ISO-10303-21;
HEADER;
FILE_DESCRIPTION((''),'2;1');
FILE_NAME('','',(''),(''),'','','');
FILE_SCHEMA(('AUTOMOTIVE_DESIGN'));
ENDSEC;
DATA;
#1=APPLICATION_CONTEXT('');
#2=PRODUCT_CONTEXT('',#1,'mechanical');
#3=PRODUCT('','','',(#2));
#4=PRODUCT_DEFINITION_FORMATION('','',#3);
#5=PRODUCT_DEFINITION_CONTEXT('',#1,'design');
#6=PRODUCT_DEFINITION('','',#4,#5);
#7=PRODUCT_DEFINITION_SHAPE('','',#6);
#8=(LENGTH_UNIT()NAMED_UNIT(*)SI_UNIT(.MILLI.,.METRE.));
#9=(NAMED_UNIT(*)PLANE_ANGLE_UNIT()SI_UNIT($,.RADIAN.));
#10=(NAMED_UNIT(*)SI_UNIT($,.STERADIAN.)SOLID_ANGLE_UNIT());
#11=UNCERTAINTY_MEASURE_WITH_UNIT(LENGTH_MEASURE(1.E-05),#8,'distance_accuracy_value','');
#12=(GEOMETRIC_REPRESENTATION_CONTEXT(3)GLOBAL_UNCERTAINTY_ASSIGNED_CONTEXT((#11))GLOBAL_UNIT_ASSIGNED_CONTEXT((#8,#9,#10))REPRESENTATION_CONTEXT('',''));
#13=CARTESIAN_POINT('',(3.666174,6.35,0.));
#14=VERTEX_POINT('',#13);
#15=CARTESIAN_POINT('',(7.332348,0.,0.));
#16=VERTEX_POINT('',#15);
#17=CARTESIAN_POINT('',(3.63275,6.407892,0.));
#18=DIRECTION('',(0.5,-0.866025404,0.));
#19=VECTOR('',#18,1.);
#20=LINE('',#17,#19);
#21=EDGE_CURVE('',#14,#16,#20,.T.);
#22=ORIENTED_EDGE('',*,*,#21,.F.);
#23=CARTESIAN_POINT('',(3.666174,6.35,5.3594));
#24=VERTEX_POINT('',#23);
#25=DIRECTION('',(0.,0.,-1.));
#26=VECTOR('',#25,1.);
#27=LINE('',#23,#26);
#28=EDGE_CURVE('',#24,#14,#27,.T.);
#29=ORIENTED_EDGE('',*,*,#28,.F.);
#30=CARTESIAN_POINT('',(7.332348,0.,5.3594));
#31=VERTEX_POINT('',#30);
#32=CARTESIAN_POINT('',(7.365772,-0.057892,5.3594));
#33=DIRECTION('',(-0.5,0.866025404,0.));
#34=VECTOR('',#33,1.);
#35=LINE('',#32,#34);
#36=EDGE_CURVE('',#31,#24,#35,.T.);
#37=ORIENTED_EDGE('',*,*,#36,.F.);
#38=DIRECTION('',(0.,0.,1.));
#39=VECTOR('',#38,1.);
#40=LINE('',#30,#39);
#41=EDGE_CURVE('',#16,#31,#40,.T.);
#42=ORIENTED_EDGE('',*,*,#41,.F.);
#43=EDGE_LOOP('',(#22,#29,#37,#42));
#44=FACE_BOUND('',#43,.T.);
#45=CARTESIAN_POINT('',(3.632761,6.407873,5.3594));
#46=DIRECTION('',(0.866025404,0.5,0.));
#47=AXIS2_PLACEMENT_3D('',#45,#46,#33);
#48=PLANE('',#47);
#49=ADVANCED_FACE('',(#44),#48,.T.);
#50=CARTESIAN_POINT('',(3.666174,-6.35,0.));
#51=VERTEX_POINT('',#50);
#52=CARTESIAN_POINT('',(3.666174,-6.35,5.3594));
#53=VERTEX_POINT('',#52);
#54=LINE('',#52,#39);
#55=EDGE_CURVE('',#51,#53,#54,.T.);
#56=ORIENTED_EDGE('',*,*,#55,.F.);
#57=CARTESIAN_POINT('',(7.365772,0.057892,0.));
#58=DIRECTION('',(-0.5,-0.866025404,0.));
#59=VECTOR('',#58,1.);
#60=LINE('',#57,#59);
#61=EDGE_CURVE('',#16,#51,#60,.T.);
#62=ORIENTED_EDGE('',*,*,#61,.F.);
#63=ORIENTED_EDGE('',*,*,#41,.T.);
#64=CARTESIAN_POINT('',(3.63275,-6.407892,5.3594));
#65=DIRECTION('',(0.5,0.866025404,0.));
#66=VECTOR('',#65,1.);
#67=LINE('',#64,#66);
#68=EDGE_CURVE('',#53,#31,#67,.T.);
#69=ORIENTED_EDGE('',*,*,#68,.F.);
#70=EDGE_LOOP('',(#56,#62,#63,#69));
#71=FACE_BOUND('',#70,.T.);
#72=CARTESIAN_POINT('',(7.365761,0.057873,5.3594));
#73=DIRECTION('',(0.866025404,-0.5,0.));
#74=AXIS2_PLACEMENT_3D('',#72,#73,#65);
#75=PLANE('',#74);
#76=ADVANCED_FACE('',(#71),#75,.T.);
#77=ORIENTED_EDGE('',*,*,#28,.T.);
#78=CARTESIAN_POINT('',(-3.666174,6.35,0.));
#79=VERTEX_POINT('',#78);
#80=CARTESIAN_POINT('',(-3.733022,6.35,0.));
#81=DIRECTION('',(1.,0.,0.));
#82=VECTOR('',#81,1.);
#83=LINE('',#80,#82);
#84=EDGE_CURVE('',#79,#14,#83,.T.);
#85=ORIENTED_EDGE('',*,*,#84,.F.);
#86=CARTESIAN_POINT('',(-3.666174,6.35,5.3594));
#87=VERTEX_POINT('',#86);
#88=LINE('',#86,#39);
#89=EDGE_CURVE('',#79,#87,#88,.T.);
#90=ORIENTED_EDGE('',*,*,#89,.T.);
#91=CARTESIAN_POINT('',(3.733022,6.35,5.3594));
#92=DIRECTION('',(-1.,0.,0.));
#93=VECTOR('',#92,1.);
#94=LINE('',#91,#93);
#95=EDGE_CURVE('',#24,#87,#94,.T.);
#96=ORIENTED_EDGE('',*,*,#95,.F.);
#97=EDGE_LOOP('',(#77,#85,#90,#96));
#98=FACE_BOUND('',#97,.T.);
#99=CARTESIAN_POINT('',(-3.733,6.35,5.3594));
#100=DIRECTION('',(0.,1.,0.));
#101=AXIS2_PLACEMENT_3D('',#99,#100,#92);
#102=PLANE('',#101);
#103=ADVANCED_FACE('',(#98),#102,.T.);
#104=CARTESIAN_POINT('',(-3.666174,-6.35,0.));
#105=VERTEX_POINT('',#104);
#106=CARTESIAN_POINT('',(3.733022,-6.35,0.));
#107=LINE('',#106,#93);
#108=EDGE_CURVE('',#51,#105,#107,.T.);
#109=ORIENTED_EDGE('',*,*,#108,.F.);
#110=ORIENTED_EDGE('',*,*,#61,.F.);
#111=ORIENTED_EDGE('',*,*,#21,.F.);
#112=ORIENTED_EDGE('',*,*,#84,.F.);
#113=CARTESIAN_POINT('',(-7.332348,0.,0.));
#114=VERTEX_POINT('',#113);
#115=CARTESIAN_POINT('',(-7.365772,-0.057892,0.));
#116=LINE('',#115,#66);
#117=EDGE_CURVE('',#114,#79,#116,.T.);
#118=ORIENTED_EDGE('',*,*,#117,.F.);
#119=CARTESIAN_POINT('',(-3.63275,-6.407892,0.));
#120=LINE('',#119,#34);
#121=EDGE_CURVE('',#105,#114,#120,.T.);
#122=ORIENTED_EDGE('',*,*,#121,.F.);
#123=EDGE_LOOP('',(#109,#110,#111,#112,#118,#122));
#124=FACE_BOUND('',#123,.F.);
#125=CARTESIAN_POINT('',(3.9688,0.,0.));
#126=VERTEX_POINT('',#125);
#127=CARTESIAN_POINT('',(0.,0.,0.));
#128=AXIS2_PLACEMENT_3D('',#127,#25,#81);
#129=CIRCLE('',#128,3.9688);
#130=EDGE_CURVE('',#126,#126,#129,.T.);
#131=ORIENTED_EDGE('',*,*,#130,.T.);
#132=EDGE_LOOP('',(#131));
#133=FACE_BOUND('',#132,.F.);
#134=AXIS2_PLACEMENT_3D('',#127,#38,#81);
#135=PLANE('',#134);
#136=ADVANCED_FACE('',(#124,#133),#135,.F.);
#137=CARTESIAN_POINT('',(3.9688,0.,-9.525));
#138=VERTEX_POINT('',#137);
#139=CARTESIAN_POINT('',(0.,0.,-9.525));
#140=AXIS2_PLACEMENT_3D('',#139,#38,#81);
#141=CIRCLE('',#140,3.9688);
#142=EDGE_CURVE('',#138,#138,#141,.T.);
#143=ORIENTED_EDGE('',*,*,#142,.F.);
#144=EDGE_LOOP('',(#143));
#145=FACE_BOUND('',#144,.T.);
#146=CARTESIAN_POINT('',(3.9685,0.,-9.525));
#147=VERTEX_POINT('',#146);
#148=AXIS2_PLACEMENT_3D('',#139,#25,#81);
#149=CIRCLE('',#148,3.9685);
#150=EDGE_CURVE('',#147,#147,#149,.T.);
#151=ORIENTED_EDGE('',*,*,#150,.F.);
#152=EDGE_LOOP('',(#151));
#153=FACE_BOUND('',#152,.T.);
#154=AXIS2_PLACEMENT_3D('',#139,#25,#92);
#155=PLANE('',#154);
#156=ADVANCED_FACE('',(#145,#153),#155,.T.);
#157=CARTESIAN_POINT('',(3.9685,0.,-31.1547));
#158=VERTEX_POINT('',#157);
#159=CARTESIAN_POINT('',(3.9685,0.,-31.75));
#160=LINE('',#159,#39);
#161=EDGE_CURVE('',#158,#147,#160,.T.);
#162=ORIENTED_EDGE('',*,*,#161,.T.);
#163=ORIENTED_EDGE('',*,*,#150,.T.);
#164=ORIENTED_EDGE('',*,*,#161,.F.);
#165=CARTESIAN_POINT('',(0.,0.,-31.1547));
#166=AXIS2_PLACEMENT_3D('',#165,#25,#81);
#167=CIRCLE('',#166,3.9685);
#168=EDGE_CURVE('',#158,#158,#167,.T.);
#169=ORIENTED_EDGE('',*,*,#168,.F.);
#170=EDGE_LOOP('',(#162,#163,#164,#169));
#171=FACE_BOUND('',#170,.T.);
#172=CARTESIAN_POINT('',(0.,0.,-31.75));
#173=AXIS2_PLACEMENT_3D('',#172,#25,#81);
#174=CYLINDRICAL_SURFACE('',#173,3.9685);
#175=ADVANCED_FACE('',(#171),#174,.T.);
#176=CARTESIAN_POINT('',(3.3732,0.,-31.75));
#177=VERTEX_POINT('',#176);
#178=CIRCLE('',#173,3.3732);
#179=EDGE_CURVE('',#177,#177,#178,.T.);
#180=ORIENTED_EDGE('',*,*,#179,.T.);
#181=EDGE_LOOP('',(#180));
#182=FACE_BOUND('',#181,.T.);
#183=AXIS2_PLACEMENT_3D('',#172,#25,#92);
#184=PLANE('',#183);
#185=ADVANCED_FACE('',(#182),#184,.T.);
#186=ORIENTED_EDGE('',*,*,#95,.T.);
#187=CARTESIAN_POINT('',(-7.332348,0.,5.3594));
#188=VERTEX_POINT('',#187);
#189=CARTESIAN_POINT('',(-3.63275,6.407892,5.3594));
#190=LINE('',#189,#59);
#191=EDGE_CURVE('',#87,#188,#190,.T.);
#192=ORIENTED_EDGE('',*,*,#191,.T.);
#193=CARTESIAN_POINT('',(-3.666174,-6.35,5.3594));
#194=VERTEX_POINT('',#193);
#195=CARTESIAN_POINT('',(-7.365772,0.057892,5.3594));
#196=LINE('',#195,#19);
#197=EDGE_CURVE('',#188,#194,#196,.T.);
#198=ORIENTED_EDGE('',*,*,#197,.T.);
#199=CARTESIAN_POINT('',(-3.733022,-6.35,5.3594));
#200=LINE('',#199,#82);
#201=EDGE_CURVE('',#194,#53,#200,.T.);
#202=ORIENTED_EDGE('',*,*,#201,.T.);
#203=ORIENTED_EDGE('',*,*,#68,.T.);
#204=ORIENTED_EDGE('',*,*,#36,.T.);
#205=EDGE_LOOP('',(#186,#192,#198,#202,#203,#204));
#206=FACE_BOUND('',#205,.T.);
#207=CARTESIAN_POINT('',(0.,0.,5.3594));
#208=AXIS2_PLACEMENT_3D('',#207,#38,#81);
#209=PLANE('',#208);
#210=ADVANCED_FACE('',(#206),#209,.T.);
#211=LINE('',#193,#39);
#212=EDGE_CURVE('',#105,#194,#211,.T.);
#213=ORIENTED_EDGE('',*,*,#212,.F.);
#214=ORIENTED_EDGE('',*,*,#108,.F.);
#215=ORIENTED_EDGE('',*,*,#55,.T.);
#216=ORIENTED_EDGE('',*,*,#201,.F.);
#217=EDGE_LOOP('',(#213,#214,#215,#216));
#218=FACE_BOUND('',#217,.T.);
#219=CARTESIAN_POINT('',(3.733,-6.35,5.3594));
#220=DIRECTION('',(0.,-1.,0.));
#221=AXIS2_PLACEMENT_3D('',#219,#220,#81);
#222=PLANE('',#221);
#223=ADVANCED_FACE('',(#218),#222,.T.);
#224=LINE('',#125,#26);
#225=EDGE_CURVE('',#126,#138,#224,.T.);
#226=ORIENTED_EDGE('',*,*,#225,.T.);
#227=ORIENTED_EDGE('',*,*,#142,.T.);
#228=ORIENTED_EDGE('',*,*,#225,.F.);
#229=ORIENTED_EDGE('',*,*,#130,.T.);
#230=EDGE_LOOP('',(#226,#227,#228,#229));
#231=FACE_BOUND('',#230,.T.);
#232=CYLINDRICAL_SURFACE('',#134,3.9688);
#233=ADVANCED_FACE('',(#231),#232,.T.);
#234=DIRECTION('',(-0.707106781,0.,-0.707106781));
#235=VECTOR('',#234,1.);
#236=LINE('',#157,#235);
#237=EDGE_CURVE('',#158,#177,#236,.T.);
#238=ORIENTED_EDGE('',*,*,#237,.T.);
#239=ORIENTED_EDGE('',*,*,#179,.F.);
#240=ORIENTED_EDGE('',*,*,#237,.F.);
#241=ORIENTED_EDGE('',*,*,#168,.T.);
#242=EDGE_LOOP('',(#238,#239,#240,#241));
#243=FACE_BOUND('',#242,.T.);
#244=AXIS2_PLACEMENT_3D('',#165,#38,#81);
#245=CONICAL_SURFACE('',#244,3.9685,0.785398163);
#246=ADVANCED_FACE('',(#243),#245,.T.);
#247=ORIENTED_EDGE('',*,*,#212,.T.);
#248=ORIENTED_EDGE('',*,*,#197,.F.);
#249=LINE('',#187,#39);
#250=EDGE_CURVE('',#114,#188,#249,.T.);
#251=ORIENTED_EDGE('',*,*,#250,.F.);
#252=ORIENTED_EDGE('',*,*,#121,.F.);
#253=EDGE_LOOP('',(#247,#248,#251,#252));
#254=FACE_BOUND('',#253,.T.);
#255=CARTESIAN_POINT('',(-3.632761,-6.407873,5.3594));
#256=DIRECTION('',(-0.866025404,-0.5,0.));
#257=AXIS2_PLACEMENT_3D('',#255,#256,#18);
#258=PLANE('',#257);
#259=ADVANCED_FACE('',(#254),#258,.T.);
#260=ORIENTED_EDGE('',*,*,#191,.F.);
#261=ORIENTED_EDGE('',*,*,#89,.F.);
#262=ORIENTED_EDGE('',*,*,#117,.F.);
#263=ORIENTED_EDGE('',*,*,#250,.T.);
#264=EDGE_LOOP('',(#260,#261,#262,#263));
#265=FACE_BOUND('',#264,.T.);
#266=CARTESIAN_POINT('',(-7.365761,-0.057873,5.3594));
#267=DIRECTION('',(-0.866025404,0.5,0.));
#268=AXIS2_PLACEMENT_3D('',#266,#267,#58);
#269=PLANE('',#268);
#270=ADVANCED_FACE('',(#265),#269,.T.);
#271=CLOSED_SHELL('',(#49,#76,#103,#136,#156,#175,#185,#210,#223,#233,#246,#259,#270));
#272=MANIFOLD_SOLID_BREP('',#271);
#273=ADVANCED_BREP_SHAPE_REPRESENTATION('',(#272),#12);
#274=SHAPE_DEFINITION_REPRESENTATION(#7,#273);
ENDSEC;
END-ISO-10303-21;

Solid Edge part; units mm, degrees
sketch "Sketch1" plane through (0, 0, 0) normal (0, 0, 1) x (1, 0, 0)
  circle A0 centre (0, 0) radius 7.366
  dimension "D1" = 14.732
extrude "Protrusion1" add sketch "Sketch1" along normal blind 5.3594
sketch "Sketch2" plane through (0, 0, 0) normal (0, 0, -1) x (1, 0, 0)
  circle A0 centre (0, 0) radius 3.9688
extrude "Protrusion2" add sketch "Sketch2" along normal blind 31.75
sketch "Sketch3" plane through (0, 0, -31.75) normal (0, 0, -1) x (1, 0, 0)
  circle A0 centre (0, 0) radius 3.9685
extrude "Cutout1" cut sketch "Sketch3" against normal blind 22.225 flip side to cut
chamfer "Chamfer_1" distance 0.5953 angle 45 1 edges at (-3.9685, 0, -31.75)
sketch "Sketch4" plane through (0, 0, 5.3594) normal (0, 0, 1) x (1, 0, 0)
  line L0 (-3.733, 6.35) -> (3.733, 6.35)
  dimension "D1" = 12.7
extrude "Cutout2" cut sketch "Sketch4" against normal up to next material side at (0, 6.4, 5.3594)
pattern_circular "Pattern1" count 6 over 360 about axis through (0, 0, 5.3594) along (0, 0, 1) of "Cutout2"
properties part number "24100069"
